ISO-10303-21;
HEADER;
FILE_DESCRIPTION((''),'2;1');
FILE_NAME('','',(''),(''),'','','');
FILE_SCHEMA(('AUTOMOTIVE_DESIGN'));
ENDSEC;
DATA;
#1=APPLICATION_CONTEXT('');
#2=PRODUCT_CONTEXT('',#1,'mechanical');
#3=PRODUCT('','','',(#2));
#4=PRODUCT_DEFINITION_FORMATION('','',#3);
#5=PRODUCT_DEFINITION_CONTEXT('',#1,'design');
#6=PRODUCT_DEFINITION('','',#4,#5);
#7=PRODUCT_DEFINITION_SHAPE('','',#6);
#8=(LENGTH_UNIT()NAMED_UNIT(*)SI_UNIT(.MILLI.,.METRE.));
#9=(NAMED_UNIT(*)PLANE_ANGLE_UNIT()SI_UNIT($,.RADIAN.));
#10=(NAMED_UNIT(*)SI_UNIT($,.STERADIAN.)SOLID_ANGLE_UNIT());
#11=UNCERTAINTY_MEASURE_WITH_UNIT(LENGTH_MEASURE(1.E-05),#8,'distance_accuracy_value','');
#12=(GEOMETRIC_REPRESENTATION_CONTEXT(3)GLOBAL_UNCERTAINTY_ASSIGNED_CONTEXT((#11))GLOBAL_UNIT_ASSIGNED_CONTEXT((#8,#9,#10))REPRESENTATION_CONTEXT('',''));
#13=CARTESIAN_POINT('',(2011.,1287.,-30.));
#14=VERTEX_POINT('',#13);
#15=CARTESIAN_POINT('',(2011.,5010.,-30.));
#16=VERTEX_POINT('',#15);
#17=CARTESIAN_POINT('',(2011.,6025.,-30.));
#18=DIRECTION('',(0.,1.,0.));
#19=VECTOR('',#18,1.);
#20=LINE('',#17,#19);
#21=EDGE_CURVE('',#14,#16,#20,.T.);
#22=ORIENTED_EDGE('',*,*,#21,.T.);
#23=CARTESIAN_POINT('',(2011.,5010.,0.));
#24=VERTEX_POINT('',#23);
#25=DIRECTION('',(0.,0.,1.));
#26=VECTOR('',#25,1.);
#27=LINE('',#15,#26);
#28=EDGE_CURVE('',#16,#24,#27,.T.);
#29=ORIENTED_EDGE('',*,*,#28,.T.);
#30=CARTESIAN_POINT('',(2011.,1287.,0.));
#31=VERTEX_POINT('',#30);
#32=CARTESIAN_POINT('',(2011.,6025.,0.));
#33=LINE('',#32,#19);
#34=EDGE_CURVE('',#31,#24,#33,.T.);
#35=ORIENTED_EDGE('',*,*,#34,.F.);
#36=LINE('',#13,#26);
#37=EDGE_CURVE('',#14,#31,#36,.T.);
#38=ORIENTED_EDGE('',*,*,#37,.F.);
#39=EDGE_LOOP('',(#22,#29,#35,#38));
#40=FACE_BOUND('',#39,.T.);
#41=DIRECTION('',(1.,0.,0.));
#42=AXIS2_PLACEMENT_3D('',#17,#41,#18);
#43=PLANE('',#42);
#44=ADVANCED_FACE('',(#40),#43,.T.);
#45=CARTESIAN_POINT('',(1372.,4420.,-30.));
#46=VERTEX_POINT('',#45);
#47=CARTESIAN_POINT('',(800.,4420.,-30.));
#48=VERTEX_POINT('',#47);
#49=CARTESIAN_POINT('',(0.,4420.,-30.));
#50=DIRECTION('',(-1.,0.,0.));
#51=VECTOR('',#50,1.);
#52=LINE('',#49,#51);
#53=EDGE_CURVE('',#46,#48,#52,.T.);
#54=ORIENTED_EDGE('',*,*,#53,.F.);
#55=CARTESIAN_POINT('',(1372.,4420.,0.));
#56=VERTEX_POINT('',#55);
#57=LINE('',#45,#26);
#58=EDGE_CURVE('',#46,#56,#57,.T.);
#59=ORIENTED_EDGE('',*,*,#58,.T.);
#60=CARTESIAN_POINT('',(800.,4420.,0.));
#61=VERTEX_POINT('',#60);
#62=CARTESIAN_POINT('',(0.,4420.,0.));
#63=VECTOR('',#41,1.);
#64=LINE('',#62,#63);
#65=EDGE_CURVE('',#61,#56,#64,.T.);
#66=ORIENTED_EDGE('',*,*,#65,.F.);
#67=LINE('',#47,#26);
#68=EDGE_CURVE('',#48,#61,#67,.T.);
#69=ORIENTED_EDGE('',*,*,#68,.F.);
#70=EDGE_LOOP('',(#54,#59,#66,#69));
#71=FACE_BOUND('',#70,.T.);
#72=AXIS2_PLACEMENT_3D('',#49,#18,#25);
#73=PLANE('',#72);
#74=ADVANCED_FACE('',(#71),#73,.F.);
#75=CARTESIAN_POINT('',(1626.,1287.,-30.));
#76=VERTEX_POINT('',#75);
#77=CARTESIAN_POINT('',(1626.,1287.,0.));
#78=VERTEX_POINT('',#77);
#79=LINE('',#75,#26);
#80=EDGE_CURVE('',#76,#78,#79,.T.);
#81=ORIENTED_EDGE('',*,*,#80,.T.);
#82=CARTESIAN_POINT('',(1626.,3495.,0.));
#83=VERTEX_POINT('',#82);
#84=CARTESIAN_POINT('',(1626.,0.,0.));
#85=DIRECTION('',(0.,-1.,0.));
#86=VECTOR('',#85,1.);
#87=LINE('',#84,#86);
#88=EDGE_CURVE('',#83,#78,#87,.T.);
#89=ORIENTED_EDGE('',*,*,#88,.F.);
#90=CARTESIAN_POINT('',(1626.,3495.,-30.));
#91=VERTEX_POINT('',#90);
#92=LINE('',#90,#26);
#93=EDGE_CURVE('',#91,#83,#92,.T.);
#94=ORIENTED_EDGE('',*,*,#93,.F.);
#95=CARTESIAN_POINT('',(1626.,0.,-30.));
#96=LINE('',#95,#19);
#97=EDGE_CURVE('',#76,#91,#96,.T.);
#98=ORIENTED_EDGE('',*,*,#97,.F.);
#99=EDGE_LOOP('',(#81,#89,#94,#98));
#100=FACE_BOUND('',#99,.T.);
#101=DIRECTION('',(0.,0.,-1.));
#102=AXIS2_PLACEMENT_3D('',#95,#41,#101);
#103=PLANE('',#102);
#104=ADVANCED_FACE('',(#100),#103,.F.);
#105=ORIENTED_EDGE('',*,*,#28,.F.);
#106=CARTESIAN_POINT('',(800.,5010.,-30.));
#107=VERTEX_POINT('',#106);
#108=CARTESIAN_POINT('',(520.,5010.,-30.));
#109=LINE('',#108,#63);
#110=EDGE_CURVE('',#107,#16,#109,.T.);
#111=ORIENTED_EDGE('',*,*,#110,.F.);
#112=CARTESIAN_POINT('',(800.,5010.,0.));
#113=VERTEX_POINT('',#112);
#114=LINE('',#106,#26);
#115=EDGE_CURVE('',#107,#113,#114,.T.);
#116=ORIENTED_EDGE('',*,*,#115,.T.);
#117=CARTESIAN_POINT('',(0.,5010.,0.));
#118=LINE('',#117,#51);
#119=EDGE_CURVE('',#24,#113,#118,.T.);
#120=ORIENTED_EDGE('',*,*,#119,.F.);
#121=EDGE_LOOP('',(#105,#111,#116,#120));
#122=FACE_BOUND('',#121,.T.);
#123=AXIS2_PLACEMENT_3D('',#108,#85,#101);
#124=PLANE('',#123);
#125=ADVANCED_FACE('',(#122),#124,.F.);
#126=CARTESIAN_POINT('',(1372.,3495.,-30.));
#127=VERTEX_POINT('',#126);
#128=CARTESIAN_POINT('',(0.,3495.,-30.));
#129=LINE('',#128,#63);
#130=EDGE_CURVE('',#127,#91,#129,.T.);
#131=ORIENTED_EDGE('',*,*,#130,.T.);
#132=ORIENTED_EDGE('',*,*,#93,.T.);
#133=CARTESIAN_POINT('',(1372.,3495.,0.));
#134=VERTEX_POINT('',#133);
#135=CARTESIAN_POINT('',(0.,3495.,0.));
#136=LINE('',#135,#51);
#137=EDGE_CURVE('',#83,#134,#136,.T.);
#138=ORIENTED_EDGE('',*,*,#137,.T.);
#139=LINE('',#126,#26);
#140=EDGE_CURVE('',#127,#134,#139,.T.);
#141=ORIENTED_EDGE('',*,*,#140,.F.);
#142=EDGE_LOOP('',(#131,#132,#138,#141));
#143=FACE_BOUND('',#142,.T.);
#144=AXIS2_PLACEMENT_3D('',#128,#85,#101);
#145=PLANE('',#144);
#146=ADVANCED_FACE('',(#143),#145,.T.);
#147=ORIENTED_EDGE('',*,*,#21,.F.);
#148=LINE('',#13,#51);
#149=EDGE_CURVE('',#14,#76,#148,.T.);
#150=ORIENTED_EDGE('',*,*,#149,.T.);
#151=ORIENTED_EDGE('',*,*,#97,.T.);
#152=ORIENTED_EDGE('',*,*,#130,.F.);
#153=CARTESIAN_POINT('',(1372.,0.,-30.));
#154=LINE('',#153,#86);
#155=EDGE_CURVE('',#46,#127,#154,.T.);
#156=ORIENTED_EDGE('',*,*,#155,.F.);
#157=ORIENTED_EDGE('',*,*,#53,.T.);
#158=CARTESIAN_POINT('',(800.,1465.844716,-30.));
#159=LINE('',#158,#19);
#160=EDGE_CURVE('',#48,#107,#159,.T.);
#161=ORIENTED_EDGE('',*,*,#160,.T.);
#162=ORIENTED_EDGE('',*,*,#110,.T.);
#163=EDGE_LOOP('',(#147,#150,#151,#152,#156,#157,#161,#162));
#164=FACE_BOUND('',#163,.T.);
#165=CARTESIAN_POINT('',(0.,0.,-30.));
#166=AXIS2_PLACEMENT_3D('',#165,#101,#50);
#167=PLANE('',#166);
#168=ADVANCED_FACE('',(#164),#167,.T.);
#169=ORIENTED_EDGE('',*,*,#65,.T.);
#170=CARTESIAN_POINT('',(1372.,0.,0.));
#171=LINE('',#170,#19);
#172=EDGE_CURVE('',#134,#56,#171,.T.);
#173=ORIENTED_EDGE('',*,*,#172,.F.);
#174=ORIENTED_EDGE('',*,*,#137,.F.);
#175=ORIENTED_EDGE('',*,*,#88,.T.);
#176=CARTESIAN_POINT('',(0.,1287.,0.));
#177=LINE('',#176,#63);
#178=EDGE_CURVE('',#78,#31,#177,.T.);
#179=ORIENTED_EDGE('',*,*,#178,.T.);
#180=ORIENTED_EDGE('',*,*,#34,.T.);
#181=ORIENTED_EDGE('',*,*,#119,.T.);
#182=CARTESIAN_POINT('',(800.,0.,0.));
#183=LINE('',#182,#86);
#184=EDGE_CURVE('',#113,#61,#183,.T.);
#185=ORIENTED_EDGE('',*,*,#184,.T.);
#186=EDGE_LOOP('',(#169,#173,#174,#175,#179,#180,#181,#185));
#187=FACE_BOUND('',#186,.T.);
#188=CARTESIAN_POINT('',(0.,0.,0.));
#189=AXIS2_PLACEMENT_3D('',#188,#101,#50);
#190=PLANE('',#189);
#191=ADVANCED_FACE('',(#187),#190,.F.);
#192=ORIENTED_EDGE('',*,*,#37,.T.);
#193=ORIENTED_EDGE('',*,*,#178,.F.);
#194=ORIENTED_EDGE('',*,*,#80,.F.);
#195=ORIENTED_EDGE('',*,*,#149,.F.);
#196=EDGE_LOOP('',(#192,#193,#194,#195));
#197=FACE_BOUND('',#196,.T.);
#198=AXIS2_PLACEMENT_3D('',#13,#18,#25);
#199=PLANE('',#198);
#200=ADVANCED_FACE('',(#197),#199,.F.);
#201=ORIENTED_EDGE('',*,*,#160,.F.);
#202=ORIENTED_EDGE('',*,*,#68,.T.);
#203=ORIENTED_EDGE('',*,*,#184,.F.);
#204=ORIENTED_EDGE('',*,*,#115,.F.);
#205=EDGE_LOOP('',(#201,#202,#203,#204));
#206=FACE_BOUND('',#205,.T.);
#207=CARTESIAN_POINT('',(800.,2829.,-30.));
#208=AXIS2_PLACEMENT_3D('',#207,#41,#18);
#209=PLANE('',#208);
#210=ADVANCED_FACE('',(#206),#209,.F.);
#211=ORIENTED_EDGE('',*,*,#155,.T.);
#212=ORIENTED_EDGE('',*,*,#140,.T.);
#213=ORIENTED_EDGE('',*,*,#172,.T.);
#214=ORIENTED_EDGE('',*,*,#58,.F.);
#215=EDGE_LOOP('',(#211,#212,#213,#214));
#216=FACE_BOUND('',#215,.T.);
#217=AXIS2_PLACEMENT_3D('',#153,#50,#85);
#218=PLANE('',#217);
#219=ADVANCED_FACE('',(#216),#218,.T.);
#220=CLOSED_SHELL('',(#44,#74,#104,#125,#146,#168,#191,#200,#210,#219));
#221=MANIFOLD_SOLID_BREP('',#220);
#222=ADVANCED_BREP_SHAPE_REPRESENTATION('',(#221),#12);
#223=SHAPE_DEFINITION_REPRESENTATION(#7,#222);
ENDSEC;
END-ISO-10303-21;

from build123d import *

# Parameters (mm, degrees)
TABAN_FLAN_1_DEPTH         = 30
KES_EKSTR_ZYON1_DEPTH      = 6352.822258219
KES_EKSTR_ZYON1_DEPTH_BACK = 6352.822258219
IZIM2_W                    = 259
IZIM2_H                    = 3030
KES_EKSTR_ZYON2_DEPTH      = 6352.822258219
KES_EKSTR_ZYON2_DEPTH_BACK = 6352.822258219
KES_EKSTR_ZYON3_DEPTH      = 6352.822258219
KES_EKSTR_ZYON3_DEPTH_BACK = 6352.822258219
IZIM4_W                    = 1491
IZIM4_H                    = 1015
KES_EKSTR_ZYON4_DEPTH      = 5399.622139028
KES_EKSTR_ZYON4_DEPTH_BACK = 5399.622139028
IZIM5_W                    = 170
IZIM5_H                    = 2081
KES_EKSTR_ZYON5_DEPTH      = 5399.622139028
KES_EKSTR_ZYON5_DEPTH_BACK = 5399.622139028
KES_EKSTR_ZYON7_DEPTH      = 5399.622139028
KES_EKSTR_ZYON7_DEPTH_BACK = 5399.622139028
IZIM7_W                    = 280
IZIM7_H                    = 2181
KES_EKSTR_ZYON8_DEPTH      = 5399.622139028
KES_EKSTR_ZYON8_DEPTH_BACK = 5399.622139028
IZIM8_W                    = 140
IZIM8_H                    = 365
KES_EKSTR_ZYON9_DEPTH      = 5399.622139028
KES_EKSTR_ZYON9_DEPTH_BACK = 5399.622139028
IZIM9_W                    = 572
IZIM9_H                    = 626
IZIM9_W_2                  = 385
IZIM9_H_2                  = 3


# Sheet-metal steps are written as plain solids
with BuildPart() as part:
    # Çizim1 → Taban-Flanş1 (new body)
    with BuildSketch(Plane.XY):
        Polygon((0, 0), (0, 3000), (261, 3000), (261, 6025), (2011, 6025), (2011, 0), align=None)
    extrude(amount=-TABAN_FLAN_1_DEPTH)

    # Çizim2 → Kes-Ekstrüzyon1 (cut, two sides: drawn at the far end of the back side and taken through both)
    with BuildSketch(Plane.XY.offset(-KES_EKSTR_ZYON1_DEPTH_BACK)):
        with Locations((390.5, 4510)):
            Rectangle(IZIM2_W, IZIM2_H)
    extrude(amount=KES_EKSTR_ZYON1_DEPTH + KES_EKSTR_ZYON1_DEPTH_BACK, mode=Mode.SUBTRACT)

    # Çizim3 → Kes-Ekstrüzyon2 (cut, two sides: drawn at the far end of the back side and taken through both)
    with BuildSketch(Plane.XY.offset(-KES_EKSTR_ZYON2_DEPTH_BACK)):
        Polygon((0, 919), (1200, 919), (1200, 1284), (2011, 1284), (2011, 0), (0, 0), align=None)
    extrude(amount=KES_EKSTR_ZYON2_DEPTH + KES_EKSTR_ZYON2_DEPTH_BACK, mode=Mode.SUBTRACT)

    # Çizim4 → Kes-Ekstrüzyon3 (cut, two sides: drawn at the far end of the back side and taken through both)
    with BuildSketch(Plane.XY.offset(-KES_EKSTR_ZYON3_DEPTH_BACK)):
        with Locations((1265.5, 5517.5)):
            Rectangle(IZIM4_W, IZIM4_H)
    extrude(amount=KES_EKSTR_ZYON3_DEPTH + KES_EKSTR_ZYON3_DEPTH_BACK, mode=Mode.SUBTRACT)

    # Çizim5 → Kes-Ekstrüzyon4 (cut, two sides: drawn at the far end of the back side and taken through both)
    with BuildSketch(Plane.XY.offset(-KES_EKSTR_ZYON4_DEPTH_BACK)):
        with Locations((85, 1959.5)):
            Rectangle(IZIM5_W, IZIM5_H)
    extrude(amount=KES_EKSTR_ZYON4_DEPTH + KES_EKSTR_ZYON4_DEPTH_BACK, mode=Mode.SUBTRACT)

    # Çizim6 → Kes-Ekstrüzyon5 (cut, two sides: drawn at the far end of the back side and taken through both)
    with BuildSketch(Plane.XY.offset(-KES_EKSTR_ZYON5_DEPTH_BACK)):
        Polygon((520, 2995), (520, 2829), (800, 2829), (800, 1465.844716129), (800, 919), (0, 663.665767546), (0, 3349.606588957), align=None)
    extrude(amount=KES_EKSTR_ZYON5_DEPTH + KES_EKSTR_ZYON5_DEPTH_BACK, mode=Mode.SUBTRACT)

    # Çizim7 → Kes-Ekstrüzyon7 (cut, two sides: drawn at the far end of the back side and taken through both)
    with BuildSketch(Plane.XY.offset(-KES_EKSTR_ZYON7_DEPTH_BACK)):
        with Locations((660, 3919.5)):
            Rectangle(IZIM7_W, IZIM7_H)
    extrude(amount=KES_EKSTR_ZYON7_DEPTH + KES_EKSTR_ZYON7_DEPTH_BACK, mode=Mode.SUBTRACT)

    # Çizim8 → Kes-Ekstrüzyon8 (cut, two sides: drawn at the far end of the back side and taken through both)
    with BuildSketch(Plane.XY.offset(-KES_EKSTR_ZYON8_DEPTH_BACK)):
        Polygon((1060, 3794), (800, 3794), (800, 919), (1060, 919), (1060, 1284), align=None)
        Polygon((1372, 3794), (1060, 3794), (1060, 1284), (1200, 1284), (1372, 1284), align=None)
        with Locations((1130, 1101.5)):
            Rectangle(IZIM8_W, IZIM8_H)
    extrude(amount=KES_EKSTR_ZYON8_DEPTH + KES_EKSTR_ZYON8_DEPTH_BACK, mode=Mode.SUBTRACT)

    # Çizim9 → Kes-Ekstrüzyon9 (cut, two sides: drawn at the far end of the back side and taken through both)
    with BuildSketch(Plane.XY.offset(-KES_EKSTR_ZYON9_DEPTH_BACK)):
        with Locations((1086, 4107)):
            Rectangle(IZIM9_W, IZIM9_H)
        Polygon((1626, 3495), (1372, 3495), (1372, 1284), (1626, 1284), (1626, 1287), align=None)
        with Locations((1818.5, 1285.5)):
            Rectangle(IZIM9_W_2, IZIM9_H_2)
    extrude(amount=KES_EKSTR_ZYON9_DEPTH + KES_EKSTR_ZYON9_DEPTH_BACK, mode=Mode.SUBTRACT)


solid = part.part
